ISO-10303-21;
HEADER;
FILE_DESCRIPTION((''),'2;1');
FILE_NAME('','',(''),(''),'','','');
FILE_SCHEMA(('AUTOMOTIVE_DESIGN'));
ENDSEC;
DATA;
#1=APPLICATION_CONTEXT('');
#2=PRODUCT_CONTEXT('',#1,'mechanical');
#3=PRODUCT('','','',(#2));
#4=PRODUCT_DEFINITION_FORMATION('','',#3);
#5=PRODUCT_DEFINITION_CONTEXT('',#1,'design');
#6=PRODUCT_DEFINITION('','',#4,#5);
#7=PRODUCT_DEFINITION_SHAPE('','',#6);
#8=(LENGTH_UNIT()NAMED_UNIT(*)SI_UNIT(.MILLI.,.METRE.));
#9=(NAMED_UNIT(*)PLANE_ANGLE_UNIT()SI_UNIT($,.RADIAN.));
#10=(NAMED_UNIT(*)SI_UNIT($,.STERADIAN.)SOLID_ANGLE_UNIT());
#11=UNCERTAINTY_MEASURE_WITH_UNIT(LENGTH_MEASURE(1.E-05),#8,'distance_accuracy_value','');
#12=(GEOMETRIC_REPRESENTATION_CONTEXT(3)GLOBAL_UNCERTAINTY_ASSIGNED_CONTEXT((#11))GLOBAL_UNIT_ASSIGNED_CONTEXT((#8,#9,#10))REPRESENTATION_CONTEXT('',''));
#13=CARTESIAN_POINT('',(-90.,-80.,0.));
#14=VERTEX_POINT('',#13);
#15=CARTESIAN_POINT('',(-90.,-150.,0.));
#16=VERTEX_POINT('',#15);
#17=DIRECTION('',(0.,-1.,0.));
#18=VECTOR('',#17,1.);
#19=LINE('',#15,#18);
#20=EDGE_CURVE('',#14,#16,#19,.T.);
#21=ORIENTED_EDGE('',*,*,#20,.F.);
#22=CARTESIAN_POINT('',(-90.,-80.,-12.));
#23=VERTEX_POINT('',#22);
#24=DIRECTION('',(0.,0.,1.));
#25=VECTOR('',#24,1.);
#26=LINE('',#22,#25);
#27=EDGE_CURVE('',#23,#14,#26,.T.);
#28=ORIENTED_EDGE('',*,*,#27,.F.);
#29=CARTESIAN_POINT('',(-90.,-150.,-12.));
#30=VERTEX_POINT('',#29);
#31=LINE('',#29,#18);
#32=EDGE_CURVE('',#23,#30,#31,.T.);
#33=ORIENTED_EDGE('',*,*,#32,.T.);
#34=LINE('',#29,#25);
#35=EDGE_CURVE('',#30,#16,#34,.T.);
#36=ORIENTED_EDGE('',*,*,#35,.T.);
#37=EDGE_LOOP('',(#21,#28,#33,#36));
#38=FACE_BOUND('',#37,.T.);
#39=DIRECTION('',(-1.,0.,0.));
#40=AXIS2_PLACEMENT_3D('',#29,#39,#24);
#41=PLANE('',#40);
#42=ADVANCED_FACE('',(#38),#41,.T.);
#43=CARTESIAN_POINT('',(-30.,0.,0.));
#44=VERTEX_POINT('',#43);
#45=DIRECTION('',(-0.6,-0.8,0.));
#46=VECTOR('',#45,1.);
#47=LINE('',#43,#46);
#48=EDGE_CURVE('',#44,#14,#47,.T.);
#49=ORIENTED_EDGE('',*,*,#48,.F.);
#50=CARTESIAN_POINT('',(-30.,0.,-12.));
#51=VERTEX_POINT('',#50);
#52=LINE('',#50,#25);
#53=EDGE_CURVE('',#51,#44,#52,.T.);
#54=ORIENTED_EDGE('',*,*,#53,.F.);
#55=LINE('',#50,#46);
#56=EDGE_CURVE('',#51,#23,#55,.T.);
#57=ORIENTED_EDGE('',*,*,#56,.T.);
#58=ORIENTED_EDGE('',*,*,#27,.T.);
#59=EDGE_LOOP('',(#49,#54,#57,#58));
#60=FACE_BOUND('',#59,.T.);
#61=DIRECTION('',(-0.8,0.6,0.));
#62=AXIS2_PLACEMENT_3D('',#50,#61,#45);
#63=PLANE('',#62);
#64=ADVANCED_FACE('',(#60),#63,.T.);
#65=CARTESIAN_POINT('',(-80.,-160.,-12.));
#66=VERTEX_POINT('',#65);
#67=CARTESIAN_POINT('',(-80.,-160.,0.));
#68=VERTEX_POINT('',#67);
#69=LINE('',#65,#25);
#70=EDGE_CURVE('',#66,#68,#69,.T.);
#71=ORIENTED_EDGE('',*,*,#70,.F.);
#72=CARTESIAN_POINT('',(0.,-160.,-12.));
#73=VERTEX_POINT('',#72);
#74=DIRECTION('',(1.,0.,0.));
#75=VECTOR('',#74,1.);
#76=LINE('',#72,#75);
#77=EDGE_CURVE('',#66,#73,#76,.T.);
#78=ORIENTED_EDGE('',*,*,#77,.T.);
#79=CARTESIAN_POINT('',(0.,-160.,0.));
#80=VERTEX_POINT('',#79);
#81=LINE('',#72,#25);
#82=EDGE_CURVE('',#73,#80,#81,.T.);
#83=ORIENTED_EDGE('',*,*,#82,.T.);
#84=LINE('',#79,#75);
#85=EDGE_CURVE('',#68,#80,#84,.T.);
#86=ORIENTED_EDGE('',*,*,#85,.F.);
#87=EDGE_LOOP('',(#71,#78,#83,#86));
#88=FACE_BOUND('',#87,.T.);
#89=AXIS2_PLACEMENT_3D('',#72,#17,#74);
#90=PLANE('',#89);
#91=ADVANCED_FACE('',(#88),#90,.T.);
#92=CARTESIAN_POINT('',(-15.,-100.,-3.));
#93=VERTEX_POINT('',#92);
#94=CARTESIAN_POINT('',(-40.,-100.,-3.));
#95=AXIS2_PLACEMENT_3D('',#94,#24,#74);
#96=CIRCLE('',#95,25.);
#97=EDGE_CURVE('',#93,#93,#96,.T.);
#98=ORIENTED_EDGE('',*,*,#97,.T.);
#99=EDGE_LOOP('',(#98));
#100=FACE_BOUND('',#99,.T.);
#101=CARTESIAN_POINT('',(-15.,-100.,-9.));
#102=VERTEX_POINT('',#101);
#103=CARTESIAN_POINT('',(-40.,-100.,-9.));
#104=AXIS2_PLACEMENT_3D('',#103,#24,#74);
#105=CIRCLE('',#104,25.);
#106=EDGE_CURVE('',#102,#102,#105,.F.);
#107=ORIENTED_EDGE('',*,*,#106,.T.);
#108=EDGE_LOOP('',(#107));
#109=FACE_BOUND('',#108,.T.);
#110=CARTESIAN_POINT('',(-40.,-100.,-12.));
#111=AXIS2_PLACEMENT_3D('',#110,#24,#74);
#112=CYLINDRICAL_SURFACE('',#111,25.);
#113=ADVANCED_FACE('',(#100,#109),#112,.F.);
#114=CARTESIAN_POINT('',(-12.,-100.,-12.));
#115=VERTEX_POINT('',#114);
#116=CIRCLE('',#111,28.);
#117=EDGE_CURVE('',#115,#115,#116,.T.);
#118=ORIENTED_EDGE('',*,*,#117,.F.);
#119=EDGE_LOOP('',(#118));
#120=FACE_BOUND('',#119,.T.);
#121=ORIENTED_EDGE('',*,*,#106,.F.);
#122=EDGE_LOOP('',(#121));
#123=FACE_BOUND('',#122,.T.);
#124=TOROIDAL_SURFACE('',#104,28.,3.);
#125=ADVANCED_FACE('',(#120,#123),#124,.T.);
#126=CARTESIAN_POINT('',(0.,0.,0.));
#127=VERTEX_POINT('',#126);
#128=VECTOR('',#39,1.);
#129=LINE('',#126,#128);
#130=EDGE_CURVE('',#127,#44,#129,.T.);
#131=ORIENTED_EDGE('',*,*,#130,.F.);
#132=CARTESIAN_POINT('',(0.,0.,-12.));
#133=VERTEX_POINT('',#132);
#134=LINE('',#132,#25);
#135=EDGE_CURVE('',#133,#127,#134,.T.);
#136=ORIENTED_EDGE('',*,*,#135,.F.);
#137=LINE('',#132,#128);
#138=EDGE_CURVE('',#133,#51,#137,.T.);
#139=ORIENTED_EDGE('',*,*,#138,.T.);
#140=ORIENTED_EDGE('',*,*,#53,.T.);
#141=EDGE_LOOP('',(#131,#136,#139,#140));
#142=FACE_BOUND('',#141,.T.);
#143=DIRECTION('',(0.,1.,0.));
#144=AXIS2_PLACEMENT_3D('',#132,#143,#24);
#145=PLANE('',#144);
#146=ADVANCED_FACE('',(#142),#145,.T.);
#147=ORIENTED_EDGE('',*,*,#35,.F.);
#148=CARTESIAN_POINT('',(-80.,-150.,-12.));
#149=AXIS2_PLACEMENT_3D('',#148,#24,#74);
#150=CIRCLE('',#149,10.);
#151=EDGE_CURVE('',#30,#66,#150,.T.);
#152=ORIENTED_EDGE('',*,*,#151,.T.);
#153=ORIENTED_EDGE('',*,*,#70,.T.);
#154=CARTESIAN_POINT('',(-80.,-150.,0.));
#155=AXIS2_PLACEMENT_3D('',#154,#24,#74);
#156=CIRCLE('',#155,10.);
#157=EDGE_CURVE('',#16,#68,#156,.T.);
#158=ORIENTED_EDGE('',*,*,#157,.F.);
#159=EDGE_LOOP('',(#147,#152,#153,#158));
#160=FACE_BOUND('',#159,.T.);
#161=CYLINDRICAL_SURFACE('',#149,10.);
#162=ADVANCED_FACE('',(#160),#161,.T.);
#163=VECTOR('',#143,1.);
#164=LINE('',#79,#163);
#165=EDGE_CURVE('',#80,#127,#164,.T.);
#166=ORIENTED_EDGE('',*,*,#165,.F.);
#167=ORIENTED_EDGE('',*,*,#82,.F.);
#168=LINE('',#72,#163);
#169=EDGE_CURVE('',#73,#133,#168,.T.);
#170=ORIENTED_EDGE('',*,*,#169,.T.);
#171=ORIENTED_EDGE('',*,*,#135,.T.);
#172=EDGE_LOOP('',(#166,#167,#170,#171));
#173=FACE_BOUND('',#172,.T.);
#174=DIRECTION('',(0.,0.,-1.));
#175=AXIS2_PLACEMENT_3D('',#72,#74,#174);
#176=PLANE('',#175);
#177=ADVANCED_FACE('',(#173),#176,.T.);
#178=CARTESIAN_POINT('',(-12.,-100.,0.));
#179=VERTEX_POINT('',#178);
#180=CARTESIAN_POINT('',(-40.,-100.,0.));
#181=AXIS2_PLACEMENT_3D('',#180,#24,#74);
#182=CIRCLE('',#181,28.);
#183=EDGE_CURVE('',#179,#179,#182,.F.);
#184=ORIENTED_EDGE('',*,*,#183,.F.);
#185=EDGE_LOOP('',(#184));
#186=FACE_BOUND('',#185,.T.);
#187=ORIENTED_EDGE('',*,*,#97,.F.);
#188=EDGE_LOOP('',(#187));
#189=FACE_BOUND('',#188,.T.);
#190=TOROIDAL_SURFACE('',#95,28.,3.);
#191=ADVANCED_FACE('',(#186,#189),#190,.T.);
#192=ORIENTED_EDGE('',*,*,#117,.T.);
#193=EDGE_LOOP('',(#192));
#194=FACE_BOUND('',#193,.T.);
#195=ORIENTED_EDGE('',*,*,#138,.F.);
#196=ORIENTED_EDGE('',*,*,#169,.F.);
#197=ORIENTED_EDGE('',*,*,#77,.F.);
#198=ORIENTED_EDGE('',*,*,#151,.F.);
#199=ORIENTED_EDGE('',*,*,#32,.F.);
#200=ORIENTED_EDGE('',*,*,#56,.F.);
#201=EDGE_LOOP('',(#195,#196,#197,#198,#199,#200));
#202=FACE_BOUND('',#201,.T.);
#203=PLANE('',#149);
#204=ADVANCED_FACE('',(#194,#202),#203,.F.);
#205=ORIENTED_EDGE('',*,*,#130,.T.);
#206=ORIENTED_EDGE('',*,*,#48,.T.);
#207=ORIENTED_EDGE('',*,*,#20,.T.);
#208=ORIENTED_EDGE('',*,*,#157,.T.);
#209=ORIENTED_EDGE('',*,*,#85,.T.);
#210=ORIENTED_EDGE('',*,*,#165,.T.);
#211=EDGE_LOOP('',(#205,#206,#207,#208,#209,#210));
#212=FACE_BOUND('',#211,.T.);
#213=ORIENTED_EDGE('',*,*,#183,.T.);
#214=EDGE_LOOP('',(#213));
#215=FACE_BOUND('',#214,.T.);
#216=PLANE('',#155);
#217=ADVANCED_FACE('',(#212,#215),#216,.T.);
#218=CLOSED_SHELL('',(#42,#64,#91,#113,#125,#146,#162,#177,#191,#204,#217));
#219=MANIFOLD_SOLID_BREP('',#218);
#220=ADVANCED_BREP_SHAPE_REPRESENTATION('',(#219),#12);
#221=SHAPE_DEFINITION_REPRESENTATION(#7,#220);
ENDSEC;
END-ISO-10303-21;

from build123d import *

# Parameters (mm, degrees)
SM_BASE_FLANGE_1_DEPTH = 12
SKETCH_2_R             = 25
CUT_EXTRUDE_1_DEPTH    = 184.967388414
FILLET_1_R             = 3


# Sheet-metal steps are written as plain solids
with BuildPart() as part:
    # Sketch 1 → 基体-法兰1 (new body)
    with BuildSketch(Plane.XY):
        with BuildLine():
            Line((-30, 0), (-90, -80))
            Line((-90, -80), (-90, -150))
            ThreePointArc((-90, -150), (-87.071067812, -157.071067812), (-80, -160))
            Line((-80, -160), (0, -160))
            Line((0, -160), (0, 0))
            Line((0, 0), (-30, 0))
        make_face()
    extrude(amount=-SM_BASE_FLANGE_1_DEPTH)

    # Sketch 2 → 切除-拉伸1 (cut, through all)
    with BuildSketch(Plane.XY):
        with Locations((-40, -100)):
            Circle(SKETCH_2_R)
    extrude(amount=-CUT_EXTRUDE_1_DEPTH, mode=Mode.SUBTRACT)

    # 圆角1
    fillet_1_edges = [part.edges().sort_by_distance(p)[0] for p in [
        (-65, -100, -12),
        (-65, -100, 0),
    ]]
    fillet(fillet_1_edges, radius=FILLET_1_R)


solid = part.part
